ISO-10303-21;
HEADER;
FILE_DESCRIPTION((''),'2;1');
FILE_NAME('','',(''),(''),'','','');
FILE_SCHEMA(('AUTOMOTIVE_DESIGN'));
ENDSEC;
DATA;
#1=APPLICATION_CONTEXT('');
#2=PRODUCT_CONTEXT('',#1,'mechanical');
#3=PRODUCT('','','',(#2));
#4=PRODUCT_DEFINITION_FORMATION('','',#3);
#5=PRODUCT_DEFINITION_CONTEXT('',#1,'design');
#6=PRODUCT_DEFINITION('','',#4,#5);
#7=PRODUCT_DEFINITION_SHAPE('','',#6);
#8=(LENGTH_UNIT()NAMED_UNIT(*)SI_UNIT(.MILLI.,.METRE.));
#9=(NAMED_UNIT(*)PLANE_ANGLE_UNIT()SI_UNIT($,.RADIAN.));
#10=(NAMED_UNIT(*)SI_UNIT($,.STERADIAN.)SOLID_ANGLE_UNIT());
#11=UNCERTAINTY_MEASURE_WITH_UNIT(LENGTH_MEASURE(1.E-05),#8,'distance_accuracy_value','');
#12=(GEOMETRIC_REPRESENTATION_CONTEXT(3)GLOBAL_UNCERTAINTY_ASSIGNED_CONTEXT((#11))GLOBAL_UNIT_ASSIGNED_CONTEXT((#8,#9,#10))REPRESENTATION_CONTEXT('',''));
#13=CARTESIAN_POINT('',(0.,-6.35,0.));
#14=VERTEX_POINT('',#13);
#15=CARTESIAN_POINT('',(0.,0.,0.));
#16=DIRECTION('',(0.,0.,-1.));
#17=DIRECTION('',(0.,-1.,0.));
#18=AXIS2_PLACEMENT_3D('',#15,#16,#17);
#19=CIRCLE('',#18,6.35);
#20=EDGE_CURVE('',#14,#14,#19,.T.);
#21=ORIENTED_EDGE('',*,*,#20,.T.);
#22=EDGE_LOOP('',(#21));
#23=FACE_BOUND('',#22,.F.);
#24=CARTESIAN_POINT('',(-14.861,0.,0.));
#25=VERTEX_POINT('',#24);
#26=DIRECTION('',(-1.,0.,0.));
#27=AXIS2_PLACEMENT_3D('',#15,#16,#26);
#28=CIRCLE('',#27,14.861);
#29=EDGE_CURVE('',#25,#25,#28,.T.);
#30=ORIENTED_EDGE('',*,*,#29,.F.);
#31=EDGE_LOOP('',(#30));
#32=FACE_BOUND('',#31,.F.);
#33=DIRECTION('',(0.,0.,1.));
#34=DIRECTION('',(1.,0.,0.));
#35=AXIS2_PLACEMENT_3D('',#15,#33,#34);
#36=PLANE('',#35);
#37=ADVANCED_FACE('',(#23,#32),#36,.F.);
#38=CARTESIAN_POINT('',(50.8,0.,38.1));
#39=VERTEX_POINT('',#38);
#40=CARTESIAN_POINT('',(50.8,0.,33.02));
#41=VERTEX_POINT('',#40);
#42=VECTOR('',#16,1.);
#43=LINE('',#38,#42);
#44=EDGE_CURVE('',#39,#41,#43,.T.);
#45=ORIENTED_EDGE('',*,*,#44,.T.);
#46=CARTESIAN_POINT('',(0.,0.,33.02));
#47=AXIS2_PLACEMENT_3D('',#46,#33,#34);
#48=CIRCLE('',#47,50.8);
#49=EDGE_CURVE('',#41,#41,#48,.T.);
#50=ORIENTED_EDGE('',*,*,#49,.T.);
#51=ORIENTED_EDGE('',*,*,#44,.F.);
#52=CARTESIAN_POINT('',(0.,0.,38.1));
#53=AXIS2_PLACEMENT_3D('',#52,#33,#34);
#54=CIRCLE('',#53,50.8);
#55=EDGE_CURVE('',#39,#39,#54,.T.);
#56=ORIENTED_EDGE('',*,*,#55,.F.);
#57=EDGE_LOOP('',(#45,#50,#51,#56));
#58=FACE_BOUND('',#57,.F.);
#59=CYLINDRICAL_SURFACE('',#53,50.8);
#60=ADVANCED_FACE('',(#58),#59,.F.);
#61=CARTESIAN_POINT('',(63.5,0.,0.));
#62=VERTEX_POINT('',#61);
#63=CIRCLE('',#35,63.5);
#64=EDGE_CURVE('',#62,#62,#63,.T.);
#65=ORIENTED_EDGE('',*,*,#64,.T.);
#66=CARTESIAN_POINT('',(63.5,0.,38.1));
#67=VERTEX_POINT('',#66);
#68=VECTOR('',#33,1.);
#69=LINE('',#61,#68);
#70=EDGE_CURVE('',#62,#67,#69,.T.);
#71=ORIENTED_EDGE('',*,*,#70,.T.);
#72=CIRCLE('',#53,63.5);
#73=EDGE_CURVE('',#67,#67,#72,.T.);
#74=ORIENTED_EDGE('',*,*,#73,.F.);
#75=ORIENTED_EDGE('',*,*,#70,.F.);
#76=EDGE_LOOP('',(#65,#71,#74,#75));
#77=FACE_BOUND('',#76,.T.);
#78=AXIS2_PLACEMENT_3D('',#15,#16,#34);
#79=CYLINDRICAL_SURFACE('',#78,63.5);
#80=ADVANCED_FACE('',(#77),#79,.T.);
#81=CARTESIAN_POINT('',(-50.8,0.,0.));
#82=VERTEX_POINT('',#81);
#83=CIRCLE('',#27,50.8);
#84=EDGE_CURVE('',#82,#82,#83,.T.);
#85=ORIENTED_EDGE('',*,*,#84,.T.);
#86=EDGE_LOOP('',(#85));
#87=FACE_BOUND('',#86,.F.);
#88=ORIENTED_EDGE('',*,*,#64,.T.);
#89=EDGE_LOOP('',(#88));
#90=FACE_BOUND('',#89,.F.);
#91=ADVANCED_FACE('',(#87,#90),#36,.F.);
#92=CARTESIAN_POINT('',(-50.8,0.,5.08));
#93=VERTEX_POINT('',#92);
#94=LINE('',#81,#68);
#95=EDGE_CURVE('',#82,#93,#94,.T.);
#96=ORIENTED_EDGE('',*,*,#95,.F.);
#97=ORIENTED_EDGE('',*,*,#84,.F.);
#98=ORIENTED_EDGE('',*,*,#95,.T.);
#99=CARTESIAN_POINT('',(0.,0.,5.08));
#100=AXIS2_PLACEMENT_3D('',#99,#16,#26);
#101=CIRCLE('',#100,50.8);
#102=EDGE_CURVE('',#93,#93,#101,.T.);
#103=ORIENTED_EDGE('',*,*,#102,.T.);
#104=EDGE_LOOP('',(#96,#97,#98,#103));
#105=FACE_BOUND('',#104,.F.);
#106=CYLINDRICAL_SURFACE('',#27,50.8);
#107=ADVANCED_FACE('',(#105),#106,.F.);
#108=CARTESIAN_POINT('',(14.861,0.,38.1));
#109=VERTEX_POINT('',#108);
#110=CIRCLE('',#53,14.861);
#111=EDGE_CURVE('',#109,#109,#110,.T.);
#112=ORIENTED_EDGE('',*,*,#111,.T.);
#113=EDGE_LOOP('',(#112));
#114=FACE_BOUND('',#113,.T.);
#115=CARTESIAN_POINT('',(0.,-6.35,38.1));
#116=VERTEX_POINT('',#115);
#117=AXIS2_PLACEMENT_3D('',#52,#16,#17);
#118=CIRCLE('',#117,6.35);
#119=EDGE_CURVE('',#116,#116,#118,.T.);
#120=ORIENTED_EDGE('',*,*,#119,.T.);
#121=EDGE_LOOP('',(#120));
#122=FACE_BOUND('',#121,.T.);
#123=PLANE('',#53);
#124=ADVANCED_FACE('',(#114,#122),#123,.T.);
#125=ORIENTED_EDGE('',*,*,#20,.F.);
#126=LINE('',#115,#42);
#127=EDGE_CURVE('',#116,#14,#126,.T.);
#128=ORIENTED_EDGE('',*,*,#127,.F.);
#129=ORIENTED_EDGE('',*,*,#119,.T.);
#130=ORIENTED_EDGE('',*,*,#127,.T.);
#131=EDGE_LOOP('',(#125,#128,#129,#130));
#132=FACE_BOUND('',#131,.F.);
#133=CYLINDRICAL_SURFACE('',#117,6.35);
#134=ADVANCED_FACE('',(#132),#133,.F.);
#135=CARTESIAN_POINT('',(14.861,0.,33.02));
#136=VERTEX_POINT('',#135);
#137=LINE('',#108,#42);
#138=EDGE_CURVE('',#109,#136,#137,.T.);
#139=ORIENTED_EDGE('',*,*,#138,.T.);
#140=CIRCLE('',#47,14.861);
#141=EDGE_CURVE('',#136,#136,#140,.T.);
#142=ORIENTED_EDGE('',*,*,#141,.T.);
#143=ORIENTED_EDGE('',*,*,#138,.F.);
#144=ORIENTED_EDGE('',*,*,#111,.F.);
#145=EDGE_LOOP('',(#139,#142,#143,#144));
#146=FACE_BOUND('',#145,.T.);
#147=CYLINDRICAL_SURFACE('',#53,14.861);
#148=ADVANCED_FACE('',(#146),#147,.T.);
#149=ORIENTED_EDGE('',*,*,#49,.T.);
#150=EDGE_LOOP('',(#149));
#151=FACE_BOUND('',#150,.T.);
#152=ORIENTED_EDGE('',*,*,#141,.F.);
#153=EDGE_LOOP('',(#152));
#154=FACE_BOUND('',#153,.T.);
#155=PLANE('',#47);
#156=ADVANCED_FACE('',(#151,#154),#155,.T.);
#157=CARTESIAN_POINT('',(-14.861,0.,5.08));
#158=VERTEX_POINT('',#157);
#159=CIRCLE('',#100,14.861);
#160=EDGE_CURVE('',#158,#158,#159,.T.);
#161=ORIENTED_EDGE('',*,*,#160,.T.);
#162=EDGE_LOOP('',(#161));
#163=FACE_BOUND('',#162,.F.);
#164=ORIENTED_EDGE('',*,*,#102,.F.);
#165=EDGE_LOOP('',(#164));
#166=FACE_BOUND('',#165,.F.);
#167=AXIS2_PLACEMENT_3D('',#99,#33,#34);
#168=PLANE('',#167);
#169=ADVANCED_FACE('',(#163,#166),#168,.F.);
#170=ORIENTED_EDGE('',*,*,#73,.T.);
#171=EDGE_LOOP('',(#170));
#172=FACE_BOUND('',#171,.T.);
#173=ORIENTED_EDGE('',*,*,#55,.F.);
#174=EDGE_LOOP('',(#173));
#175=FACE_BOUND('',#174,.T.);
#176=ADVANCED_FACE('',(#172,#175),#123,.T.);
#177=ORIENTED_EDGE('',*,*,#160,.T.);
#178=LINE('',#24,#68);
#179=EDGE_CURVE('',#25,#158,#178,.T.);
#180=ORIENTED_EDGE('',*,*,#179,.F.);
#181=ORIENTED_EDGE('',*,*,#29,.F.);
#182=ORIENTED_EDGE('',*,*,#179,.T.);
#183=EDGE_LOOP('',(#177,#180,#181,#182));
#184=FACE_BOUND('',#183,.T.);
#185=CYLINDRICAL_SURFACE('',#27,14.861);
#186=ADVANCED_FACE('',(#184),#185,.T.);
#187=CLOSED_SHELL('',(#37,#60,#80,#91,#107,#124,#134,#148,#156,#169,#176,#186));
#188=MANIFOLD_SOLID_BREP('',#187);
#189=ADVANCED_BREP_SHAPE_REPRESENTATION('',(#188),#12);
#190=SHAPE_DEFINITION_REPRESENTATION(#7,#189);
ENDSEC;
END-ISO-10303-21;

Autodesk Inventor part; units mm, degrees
ref_plane "YZ Plane" through (0, 0, 0) normal (1, 0, 0) x (0, 1, 0)
ref_plane "XZ Plane" through (0, 0, 0) normal (0, 1, 0) x (-1, 0, 0)
ref_plane "XY Plane" through (0, 0, 0) normal (0, 0, 1) x (1, 0, 0)
sketch "Sketch3" plane through (0, 0, 0) normal (0, 0, 1) x (1, 0, 0)
  circle A0 centre (0, 0) radius 63.5
  dimension "d1" = 127
extrude "Extrusion1" add sketch "Sketch3" along normal blind 38.1
sketch "Sketch4" plane through (0, 0, 38.1) normal (0, 0, 1) x (1, 0, 0)
  circle A0 centre (0, 0) radius 6.35
  dimension "d4" = 12.7
hole "Hole1" at (0, 0, 38.1) direction (0, 0, -1) diameter 12.7 end through all
sketch "Sketch5" plane through (0, 0, 38.1) normal (0, 0, 1) x (1, 0, 0)
  circle A0 centre (0, 0) radius 50.8
  circle A1 centre (0, 0) radius 14.861
  dimension "d12" = 101.6
  dimension "d13" = 29.722
emboss "Emboss1" sketch "Sketch5" operation cut depth 5.08 direction (0, 0, -1)
sketch "Sketch6" plane through (0, 0, 0) normal (0, 0, -1) x (-1, 0, 0)
  circle A0 centre (0, 0) radius 50.8
  circle A1 centre (0, 0) radius 14.861
  dimension "d16" = 101.6
  dimension "d17" = 29.722
emboss "Emboss2" sketch "Sketch6" operation cut depth 5.08 direction (0, 0, 1)
properties part number "SubWheelWithHole"
